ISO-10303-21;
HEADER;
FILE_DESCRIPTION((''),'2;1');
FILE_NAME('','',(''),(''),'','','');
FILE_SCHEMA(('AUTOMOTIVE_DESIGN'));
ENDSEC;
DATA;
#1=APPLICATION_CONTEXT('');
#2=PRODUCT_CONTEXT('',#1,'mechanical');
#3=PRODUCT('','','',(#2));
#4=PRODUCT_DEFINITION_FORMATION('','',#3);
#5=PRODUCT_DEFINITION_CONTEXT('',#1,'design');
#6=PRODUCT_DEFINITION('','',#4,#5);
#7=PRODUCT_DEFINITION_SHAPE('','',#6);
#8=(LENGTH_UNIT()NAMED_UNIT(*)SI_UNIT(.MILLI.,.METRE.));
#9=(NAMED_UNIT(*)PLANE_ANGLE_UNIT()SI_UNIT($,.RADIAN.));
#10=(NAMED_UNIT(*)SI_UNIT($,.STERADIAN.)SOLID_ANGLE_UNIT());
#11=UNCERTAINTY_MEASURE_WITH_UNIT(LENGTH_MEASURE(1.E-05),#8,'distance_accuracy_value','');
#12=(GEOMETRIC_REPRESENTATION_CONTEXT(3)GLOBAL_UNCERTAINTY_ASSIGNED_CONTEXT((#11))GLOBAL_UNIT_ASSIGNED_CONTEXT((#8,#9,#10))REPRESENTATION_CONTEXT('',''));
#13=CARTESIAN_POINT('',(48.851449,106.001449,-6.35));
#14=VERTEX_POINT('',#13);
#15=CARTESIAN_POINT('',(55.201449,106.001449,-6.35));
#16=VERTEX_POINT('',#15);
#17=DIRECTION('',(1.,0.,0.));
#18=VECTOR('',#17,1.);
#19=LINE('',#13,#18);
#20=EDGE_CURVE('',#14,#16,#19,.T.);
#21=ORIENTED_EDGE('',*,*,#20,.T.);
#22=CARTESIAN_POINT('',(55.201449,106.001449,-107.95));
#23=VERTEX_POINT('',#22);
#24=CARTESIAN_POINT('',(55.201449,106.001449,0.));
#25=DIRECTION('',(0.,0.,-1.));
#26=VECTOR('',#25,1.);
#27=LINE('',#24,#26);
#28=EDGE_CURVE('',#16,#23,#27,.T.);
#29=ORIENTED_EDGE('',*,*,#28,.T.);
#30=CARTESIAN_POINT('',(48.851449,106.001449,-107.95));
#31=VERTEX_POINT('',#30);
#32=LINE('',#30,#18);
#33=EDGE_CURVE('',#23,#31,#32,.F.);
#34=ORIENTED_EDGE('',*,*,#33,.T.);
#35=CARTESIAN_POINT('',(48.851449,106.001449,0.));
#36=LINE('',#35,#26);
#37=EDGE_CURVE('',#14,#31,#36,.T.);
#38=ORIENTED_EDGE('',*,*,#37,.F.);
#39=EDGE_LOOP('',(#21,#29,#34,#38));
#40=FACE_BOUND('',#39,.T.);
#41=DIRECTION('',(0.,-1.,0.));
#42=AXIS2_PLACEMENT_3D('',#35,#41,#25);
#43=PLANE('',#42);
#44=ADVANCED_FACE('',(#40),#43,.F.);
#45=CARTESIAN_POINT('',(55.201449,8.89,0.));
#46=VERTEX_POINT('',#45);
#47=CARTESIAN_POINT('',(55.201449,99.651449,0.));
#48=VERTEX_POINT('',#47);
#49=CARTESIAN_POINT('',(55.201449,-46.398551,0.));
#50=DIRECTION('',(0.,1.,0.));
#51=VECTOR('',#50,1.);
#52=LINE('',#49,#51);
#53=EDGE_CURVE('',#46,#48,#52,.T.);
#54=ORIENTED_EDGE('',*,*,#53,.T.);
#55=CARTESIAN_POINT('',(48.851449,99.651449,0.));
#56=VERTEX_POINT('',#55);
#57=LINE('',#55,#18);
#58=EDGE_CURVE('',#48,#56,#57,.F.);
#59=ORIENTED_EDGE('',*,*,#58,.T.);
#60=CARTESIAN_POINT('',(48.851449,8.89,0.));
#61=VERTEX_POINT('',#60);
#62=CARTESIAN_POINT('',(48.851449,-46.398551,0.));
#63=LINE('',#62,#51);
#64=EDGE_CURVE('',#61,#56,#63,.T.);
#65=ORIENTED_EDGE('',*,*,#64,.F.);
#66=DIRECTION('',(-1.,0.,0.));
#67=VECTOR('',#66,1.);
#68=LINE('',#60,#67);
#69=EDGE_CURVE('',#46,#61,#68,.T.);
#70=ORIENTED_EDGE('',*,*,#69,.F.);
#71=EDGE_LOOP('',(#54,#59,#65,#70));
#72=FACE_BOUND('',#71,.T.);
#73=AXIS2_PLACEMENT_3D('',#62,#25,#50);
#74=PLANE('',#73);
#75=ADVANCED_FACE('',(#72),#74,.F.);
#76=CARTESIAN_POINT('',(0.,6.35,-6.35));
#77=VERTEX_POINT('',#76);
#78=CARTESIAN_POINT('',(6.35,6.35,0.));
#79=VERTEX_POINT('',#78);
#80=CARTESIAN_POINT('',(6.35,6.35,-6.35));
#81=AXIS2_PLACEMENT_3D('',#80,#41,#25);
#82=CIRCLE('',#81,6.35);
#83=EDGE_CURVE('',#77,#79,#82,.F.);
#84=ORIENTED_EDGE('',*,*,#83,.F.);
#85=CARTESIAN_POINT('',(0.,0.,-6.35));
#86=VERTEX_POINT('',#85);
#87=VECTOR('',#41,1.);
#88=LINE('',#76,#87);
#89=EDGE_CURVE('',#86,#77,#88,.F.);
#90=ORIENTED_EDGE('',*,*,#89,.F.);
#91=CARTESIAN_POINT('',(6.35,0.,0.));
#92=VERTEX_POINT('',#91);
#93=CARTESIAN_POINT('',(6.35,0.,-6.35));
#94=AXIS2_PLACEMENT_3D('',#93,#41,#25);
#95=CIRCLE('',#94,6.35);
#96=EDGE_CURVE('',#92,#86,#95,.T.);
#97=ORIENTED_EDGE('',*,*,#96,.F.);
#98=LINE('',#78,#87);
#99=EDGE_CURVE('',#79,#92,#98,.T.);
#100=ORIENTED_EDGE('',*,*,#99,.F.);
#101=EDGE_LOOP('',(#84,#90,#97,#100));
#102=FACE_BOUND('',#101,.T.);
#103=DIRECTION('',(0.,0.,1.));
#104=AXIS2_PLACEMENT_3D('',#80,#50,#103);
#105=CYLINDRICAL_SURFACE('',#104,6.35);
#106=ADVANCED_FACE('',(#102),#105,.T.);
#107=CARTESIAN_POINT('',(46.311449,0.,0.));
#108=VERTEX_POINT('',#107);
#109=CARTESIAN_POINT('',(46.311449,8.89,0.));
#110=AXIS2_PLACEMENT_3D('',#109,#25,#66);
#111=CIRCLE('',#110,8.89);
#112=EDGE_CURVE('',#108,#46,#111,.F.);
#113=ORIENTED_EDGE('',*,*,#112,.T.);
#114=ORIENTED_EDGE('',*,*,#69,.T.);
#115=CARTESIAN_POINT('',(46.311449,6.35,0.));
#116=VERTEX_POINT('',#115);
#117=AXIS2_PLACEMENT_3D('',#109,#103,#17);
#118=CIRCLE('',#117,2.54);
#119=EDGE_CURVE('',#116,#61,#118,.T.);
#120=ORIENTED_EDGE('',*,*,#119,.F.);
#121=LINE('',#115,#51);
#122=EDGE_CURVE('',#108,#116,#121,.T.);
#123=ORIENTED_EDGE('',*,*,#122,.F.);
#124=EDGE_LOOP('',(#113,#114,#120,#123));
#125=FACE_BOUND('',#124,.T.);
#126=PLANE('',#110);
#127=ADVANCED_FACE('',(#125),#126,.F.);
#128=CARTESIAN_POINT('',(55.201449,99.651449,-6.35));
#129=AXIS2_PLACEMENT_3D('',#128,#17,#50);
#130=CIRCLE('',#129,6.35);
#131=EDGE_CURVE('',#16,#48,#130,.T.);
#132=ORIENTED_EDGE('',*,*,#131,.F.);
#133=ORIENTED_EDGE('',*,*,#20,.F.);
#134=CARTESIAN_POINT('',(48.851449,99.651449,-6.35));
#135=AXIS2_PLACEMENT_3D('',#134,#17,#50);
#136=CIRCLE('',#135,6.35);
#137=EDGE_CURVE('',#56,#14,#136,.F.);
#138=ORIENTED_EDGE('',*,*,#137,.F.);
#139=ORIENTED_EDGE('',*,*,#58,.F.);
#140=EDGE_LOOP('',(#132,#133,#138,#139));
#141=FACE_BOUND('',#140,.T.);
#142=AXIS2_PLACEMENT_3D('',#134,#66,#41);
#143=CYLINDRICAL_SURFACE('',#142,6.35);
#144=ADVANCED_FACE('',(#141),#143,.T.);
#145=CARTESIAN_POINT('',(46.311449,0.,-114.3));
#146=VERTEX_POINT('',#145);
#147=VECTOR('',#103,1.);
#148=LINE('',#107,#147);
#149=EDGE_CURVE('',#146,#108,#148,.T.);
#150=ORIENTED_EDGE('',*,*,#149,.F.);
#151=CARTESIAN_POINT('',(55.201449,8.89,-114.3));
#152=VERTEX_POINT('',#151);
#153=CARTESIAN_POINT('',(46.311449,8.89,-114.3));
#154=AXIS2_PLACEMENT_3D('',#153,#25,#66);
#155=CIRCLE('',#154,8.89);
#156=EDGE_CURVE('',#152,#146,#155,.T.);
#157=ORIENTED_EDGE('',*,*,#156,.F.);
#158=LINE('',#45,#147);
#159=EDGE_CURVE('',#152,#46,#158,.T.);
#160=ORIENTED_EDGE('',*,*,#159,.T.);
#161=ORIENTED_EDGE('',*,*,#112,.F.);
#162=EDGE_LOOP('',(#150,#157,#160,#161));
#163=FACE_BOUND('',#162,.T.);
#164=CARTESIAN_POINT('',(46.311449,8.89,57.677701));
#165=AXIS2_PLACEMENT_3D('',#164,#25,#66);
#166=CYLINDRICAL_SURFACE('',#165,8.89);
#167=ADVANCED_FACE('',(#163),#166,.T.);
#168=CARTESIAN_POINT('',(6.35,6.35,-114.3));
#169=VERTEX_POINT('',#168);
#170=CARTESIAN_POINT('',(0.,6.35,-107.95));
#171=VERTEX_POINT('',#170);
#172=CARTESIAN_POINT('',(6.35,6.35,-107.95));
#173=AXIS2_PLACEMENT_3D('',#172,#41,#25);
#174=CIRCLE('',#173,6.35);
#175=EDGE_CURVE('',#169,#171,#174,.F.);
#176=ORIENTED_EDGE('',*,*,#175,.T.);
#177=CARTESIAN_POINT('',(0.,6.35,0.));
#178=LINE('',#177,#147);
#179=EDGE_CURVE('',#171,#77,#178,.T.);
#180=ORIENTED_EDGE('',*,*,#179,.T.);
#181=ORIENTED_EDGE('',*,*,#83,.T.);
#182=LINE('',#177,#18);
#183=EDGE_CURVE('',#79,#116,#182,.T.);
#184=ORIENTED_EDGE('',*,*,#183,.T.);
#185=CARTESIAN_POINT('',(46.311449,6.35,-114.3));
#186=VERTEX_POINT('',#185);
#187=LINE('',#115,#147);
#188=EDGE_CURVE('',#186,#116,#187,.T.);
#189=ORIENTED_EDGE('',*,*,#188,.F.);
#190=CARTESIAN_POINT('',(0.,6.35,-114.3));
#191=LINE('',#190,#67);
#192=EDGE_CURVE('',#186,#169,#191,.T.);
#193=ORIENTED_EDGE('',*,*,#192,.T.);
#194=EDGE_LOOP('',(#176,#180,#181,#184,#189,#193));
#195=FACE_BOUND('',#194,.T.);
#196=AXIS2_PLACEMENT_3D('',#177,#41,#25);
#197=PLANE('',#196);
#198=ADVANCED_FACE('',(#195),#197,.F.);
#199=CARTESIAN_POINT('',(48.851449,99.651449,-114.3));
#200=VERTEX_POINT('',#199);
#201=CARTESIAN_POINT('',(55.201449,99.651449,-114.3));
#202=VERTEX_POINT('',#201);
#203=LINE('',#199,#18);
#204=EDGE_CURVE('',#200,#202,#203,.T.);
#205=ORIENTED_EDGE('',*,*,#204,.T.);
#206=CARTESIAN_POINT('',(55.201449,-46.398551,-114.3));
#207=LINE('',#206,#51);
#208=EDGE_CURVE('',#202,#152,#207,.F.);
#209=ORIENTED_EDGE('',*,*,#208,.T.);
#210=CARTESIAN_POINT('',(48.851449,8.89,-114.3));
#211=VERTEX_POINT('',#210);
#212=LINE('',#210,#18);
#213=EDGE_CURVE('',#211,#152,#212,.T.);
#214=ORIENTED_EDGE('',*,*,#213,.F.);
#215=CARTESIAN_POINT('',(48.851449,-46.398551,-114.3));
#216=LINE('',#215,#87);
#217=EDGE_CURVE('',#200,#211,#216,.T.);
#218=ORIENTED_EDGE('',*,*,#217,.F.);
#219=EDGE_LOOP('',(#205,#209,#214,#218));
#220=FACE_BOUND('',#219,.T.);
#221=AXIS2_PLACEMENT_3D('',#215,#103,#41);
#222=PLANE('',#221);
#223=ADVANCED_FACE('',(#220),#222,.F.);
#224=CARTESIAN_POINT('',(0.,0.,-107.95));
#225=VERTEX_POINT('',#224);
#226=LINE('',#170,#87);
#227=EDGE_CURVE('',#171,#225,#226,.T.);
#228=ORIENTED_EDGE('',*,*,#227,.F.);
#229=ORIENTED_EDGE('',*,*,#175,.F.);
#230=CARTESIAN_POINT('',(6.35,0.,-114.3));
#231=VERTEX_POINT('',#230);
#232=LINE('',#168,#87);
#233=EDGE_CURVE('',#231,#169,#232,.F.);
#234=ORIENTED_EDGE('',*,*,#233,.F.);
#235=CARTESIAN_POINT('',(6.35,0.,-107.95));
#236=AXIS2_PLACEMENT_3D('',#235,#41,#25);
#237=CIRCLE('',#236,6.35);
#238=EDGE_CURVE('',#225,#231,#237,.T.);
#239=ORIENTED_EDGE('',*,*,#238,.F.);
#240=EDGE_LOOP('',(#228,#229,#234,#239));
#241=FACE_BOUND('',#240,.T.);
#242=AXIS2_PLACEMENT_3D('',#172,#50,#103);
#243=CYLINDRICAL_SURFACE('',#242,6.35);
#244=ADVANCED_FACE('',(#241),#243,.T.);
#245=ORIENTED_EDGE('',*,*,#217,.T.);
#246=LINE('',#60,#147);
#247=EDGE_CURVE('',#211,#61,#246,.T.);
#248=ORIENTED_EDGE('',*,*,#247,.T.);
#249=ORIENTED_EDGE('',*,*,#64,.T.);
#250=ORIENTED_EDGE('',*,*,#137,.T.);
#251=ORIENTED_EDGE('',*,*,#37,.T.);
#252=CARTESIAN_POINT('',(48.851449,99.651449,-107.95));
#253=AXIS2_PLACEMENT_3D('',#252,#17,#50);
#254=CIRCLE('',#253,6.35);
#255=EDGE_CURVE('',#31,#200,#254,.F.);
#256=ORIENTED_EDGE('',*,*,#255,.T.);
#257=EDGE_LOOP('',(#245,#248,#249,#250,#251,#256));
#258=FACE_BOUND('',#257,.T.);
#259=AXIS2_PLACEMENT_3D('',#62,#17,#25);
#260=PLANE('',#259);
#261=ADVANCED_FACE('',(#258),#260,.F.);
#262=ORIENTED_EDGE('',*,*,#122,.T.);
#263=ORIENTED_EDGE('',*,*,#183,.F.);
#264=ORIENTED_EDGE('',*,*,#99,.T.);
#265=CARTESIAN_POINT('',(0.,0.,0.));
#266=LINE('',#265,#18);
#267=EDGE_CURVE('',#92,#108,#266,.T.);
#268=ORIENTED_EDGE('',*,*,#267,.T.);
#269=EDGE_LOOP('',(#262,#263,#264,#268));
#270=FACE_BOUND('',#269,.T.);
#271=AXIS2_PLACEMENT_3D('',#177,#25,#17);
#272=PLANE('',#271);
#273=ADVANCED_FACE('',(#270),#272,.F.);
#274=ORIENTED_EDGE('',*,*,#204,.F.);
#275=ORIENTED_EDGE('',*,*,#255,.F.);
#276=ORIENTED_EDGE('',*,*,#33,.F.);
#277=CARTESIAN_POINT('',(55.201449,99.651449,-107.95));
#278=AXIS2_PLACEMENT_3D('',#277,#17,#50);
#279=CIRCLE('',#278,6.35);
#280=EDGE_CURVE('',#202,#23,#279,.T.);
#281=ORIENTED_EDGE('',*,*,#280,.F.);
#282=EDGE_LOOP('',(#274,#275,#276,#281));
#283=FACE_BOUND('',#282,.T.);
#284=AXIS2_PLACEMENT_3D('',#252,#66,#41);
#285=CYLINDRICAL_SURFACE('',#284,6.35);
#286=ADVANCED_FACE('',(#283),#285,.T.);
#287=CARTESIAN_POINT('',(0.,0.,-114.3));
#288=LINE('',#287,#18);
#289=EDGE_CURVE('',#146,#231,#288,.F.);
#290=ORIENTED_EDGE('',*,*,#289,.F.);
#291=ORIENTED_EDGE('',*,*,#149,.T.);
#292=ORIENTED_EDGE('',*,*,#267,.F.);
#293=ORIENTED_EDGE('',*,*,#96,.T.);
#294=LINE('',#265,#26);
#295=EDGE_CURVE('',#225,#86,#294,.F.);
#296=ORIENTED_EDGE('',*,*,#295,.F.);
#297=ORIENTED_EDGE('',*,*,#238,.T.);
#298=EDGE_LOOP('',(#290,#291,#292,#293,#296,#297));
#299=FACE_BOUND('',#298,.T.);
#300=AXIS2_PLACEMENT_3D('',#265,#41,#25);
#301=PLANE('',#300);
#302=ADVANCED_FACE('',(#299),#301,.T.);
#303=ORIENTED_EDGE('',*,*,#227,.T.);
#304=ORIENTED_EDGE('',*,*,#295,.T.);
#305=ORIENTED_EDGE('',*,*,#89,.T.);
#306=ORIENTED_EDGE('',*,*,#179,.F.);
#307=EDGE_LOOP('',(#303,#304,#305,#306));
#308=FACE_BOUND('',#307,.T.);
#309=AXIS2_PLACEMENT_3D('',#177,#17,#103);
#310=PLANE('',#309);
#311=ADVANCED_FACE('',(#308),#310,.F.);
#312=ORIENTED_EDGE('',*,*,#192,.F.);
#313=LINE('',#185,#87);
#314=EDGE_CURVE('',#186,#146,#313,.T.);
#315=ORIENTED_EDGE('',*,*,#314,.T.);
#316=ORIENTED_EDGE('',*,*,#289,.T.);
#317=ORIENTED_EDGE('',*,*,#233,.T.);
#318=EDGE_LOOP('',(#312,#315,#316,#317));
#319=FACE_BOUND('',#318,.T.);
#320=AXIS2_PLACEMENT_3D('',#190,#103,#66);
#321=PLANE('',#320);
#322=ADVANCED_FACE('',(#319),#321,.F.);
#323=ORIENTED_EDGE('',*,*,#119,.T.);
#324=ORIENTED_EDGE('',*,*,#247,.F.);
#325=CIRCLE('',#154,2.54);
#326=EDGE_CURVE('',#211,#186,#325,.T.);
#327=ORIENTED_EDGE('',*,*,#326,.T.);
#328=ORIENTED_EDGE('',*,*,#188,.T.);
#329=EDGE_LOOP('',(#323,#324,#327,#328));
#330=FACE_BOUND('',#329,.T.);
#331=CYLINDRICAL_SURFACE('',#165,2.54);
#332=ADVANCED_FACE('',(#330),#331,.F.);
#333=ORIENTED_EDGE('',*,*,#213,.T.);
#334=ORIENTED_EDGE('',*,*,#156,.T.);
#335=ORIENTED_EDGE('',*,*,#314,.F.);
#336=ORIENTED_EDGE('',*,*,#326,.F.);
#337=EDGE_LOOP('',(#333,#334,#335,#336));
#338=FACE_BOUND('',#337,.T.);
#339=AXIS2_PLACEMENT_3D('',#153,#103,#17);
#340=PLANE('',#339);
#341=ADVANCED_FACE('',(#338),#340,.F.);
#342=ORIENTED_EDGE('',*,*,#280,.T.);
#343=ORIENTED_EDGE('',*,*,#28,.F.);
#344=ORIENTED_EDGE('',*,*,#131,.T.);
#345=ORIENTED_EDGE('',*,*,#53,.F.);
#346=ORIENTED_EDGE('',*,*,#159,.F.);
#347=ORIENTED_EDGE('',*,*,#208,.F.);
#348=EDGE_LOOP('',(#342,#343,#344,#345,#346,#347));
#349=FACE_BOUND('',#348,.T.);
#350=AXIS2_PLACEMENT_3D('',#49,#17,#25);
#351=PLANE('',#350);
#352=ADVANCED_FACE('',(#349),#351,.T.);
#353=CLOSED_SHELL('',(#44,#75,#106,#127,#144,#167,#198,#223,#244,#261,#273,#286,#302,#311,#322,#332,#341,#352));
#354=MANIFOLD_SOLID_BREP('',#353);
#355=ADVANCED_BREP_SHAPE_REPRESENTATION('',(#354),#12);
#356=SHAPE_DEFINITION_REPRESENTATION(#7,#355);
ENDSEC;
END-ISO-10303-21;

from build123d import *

# Parameters (mm, degrees)
SKETCH11_W             = 152.4
SKETCH11_H             = 114.3
BOSS_EXTRUDE1_DEPTH    = 6.35
SKETCHED_START         = -114.3
SKETCHED_BEND1_DEPTH   = 114.3
SKETCHED_BEND1_2_DEPTH = 114.3
FILLET1_R              = 6.35


# Read off the part's stored shape, not the designer's step: Sketched Bend1
with BuildPart() as part:
    # Sketch11 → Boss-Extrude1 (new body)
    with BuildSketch(Plane(origin=(0, 0, 0), x_dir=(1, 0, 0), z_dir=(0, 1, 0))):
        with Locations((76.2, 57.15)):
            Rectangle(SKETCH11_W, SKETCH11_H)
    extrude(amount=BOSS_EXTRUDE1_DEPTH)

    # Sketched Bend1 outline → Sketched Bend1 (cut)
    with BuildSketch(Plane.XY.offset(SKETCHED_START)):
        with BuildLine():
            Line((152.4, 6.35), (54.83086849, 6.35))
            ThreePointArc((54.83086849, 6.35), (51.624240665, 1.762142678), (46.311449496, 0))
            Line((46.311449496, 0), (152.4, 0))
            Line((152.4, 0), (152.4, 6.35))
        make_face()
    extrude(amount=SKETCHED_BEND1_DEPTH, mode=Mode.SUBTRACT)

    # Sketched Bend1 2 outline → Sketched Bend1 2 (add)
    with BuildSketch(Plane.XY.offset(SKETCHED_START)):
        with BuildLine():
            Line((48.851449496, 106.001449496), (48.851449496, 8.89))
            ThreePointArc((48.851449496, 8.89), (48.10750072, 7.093948776), (46.311449496, 6.35))
            Line((46.311449496, 6.35), (54.83086849, 6.35))
            ThreePointArc((54.83086849, 6.35), (55.108316406, 7.606554415), (55.201449496, 8.89))
            Line((55.201449496, 8.89), (55.201449496, 106.001449496))
            Line((55.201449496, 106.001449496), (48.851449496, 106.001449496))
        make_face()
    extrude(amount=SKETCHED_BEND1_2_DEPTH)

    # Fillet1
    fillet1_edges = [part.edges().sort_by_distance(p)[0] for p in [
        (0, 3.175, 0),
        (0, 3.175, -114.3),
        (52.026449496, 106.001449496, -114.3),
        (52.026449496, 106.001449496, 0),
    ]]
    fillet(fillet1_edges, radius=FILLET1_R)


solid = part.part
